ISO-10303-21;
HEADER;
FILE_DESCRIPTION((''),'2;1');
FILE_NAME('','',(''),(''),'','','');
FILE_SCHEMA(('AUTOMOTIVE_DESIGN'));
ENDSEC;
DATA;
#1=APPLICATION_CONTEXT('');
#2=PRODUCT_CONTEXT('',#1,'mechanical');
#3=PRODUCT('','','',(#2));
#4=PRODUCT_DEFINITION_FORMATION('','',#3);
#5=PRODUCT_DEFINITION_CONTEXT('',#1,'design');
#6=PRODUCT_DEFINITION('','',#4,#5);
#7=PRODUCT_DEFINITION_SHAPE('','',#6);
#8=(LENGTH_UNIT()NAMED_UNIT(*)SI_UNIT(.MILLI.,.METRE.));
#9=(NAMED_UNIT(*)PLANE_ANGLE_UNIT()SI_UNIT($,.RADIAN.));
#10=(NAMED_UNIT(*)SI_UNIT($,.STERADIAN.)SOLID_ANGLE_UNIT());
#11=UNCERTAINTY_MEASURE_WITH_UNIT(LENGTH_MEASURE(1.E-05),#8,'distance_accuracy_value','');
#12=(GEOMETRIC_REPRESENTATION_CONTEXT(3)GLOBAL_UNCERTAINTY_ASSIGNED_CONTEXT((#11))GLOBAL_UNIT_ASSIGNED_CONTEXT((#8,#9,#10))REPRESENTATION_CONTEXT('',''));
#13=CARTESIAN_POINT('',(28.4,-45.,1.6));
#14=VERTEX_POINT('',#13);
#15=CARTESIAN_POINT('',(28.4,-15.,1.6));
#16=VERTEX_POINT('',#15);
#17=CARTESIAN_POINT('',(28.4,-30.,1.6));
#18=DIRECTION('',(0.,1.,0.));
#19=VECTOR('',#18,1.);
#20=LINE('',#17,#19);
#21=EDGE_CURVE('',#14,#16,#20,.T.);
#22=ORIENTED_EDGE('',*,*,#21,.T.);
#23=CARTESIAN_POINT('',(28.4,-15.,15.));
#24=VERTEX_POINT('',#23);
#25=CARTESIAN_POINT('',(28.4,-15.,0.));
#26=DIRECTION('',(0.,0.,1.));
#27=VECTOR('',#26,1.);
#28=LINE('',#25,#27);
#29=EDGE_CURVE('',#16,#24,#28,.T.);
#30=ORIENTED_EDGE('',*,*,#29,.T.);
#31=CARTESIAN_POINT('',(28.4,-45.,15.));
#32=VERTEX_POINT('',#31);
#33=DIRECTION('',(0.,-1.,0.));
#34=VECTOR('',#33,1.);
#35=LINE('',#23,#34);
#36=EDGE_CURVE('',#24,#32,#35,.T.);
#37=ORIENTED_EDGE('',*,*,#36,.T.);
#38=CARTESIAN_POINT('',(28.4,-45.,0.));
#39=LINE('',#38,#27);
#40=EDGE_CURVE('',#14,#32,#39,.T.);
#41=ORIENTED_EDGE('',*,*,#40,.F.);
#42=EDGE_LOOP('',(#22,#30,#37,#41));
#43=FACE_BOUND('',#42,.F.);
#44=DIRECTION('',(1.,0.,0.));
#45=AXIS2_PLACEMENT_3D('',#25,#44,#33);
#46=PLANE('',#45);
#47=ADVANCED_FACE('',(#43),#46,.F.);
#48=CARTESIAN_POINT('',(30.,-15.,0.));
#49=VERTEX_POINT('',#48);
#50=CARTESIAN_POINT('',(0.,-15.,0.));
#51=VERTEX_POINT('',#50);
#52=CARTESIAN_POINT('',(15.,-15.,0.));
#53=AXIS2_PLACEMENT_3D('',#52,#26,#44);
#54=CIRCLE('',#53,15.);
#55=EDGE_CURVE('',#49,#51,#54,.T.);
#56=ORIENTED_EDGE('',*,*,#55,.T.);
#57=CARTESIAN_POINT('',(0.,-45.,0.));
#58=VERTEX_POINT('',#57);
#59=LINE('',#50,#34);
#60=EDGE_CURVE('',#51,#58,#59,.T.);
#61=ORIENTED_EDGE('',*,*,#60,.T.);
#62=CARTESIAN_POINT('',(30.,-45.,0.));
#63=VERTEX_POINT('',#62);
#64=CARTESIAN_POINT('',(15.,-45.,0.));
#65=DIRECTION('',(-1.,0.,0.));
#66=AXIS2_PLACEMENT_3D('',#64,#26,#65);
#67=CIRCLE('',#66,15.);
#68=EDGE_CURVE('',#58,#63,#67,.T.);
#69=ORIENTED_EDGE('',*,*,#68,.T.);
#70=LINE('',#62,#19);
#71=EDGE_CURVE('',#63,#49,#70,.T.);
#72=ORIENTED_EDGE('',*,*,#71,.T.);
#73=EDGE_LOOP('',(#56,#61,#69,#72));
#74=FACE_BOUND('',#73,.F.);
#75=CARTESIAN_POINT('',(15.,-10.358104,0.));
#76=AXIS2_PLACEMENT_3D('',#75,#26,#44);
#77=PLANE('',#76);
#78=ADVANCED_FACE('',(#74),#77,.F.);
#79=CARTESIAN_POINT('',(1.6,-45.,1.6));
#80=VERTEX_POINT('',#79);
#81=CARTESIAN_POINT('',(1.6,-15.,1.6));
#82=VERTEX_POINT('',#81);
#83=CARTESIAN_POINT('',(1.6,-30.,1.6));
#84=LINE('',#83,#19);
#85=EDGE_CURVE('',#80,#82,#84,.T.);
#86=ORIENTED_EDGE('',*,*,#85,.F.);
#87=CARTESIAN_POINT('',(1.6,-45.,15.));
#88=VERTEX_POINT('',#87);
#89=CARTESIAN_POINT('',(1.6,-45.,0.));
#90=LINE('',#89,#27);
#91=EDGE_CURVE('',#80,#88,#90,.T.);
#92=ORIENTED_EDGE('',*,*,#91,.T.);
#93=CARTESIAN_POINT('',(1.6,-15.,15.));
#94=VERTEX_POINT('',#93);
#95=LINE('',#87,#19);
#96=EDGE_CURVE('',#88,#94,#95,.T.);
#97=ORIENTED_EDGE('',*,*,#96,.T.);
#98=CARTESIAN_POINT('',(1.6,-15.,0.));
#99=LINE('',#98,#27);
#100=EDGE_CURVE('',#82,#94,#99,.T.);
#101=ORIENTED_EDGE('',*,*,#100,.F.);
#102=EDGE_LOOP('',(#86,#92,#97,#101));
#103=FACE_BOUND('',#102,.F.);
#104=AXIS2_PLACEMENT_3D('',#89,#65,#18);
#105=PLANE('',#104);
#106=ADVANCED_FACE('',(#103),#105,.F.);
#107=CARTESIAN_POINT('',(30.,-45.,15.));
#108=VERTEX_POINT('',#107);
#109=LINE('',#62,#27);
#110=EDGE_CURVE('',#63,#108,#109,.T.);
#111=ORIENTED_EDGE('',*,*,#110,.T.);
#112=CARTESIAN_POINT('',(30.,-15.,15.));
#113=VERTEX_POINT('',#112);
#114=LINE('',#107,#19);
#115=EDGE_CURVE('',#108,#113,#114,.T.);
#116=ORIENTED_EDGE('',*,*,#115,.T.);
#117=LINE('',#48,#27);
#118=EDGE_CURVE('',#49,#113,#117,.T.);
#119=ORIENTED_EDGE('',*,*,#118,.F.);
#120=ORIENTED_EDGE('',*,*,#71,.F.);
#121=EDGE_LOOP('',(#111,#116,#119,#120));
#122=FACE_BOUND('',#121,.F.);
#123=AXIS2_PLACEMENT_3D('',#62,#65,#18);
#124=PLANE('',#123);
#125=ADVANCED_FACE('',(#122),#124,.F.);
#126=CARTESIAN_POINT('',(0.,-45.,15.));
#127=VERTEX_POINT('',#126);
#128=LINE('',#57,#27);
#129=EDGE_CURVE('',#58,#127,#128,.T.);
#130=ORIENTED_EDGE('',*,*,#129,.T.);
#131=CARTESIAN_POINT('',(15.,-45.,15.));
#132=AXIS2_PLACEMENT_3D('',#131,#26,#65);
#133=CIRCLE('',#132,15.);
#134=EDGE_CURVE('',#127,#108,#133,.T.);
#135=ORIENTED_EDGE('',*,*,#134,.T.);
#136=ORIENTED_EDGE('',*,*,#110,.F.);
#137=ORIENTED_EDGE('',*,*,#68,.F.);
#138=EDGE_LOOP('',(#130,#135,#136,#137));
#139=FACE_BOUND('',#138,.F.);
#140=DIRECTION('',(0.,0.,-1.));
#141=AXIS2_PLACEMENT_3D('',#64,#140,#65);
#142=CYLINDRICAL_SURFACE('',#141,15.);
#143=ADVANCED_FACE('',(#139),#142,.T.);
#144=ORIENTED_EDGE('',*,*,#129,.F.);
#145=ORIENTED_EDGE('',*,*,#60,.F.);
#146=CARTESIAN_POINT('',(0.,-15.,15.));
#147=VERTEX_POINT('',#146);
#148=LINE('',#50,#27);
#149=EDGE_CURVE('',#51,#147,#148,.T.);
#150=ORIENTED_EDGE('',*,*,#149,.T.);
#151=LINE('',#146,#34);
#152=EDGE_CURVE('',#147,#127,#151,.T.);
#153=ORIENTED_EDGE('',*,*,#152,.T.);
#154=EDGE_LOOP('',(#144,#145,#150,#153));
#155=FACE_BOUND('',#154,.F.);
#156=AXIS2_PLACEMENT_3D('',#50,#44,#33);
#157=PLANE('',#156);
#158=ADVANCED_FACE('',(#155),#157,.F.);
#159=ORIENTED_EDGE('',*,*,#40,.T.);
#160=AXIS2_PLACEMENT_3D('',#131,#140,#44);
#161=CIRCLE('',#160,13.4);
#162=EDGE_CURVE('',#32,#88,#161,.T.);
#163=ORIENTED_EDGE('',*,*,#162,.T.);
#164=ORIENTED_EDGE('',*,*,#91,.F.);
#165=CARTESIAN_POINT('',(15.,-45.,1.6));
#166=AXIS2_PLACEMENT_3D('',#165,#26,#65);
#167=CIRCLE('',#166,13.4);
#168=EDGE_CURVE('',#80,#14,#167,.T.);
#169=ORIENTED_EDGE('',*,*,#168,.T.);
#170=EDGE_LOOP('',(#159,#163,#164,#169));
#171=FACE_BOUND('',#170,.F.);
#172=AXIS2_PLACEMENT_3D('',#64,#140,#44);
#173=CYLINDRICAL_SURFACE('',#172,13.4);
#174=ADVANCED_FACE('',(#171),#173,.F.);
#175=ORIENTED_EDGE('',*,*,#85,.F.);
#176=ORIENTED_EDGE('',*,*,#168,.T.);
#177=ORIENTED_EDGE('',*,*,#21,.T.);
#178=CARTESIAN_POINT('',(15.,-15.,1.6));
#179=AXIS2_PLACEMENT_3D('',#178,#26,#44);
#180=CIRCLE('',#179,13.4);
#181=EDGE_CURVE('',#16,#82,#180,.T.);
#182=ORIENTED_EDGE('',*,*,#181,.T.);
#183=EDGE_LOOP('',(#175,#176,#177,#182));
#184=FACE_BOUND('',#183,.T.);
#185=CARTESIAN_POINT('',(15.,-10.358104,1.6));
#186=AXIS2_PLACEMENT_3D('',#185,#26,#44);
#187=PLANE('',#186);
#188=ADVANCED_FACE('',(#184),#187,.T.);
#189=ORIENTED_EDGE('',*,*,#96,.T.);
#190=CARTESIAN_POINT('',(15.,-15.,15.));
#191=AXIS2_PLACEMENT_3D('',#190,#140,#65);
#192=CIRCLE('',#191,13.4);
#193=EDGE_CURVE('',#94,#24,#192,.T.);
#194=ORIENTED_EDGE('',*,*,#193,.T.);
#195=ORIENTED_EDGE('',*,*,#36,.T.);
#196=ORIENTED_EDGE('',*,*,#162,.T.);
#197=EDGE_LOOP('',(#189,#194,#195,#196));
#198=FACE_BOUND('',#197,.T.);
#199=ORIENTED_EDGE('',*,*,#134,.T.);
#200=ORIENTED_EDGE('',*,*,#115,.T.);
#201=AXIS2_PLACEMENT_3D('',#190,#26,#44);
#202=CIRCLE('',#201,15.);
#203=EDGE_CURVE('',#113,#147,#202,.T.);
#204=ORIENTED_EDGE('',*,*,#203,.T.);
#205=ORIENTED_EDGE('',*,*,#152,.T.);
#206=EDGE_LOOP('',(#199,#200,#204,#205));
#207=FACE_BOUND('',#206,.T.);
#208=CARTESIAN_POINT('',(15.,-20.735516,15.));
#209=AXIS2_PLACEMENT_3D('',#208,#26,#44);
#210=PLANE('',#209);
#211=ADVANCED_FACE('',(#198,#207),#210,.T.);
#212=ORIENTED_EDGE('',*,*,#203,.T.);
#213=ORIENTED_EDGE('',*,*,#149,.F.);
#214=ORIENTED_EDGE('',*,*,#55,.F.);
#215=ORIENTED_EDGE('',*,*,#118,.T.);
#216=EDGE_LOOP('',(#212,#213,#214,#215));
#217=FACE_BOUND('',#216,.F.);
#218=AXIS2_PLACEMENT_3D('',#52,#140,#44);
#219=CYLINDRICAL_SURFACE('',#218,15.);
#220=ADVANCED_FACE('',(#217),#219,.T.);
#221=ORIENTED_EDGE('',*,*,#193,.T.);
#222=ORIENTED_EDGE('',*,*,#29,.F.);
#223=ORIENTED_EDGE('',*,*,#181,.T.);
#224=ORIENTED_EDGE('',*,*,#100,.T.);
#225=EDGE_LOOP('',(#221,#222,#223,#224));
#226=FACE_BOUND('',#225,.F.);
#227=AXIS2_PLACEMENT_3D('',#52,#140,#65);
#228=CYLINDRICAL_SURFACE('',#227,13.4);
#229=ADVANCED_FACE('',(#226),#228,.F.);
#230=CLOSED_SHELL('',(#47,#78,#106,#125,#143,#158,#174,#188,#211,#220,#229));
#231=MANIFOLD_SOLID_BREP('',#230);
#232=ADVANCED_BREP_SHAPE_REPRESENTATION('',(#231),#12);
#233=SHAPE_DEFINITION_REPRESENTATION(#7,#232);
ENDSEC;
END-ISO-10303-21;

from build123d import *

# Parameters (mm, degrees)
F1_DEPTH = 15
F0_W     = 26.8
F0_H     = 30
F2_DEPTH = 1.6


# Not quite as in the source:
# - a feature names something its author has since deleted; it is built from what else it names


with BuildPart() as f1:
    # F0 (on Top) → F1 (new body)
    with BuildSketch(Plane.XY):
        with BuildLine():
            ThreePointArc((30, -15), (25.6066017178, -4.3933982822), (15, 0))
            ThreePointArc((15, 0), (4.3933982822, -4.3933982822), (0, -15))
            Line((0, -15), (0, -45))
            Line((0, -45), (1.6, -45))
            Line((1.6, -45), (1.6, -15))
            ThreePointArc((1.6, -15), (15, -1.6), (28.4, -15))
            Line((28.4, -15), (28.4, -45))
            Line((28.4, -45), (30, -45))
            Line((30, -45), (30, -15))
        make_face()
        with BuildLine():
            Line((1.6, -45), (0, -45))
            ThreePointArc((0, -45), (4.3933982822, -55.6066017178), (15, -60))
            ThreePointArc((15, -60), (25.6066017178, -55.6066017178), (30, -45))
            Line((30, -45), (28.4, -45))
            ThreePointArc((28.4, -45), (15, -58.4), (1.6, -45))
        make_face()
    extrude(amount=F1_DEPTH)

    # F0 (on Top) → F2 (join)
    with BuildSketch(Plane.XY):
        with BuildLine():
            ThreePointArc((28.4, -15), (15, -1.6), (1.6, -15))
            Line((1.6, -15), (28.4, -15))
        make_face()
        with BuildLine():
            Line((28.4, -45), (1.6, -45))
            ThreePointArc((1.6, -45), (15, -58.4), (28.4, -45))
        make_face()
        with Locations((15, -30)):
            Rectangle(F0_W, F0_H)
    extrude(amount=F2_DEPTH)


solid = f1.part
